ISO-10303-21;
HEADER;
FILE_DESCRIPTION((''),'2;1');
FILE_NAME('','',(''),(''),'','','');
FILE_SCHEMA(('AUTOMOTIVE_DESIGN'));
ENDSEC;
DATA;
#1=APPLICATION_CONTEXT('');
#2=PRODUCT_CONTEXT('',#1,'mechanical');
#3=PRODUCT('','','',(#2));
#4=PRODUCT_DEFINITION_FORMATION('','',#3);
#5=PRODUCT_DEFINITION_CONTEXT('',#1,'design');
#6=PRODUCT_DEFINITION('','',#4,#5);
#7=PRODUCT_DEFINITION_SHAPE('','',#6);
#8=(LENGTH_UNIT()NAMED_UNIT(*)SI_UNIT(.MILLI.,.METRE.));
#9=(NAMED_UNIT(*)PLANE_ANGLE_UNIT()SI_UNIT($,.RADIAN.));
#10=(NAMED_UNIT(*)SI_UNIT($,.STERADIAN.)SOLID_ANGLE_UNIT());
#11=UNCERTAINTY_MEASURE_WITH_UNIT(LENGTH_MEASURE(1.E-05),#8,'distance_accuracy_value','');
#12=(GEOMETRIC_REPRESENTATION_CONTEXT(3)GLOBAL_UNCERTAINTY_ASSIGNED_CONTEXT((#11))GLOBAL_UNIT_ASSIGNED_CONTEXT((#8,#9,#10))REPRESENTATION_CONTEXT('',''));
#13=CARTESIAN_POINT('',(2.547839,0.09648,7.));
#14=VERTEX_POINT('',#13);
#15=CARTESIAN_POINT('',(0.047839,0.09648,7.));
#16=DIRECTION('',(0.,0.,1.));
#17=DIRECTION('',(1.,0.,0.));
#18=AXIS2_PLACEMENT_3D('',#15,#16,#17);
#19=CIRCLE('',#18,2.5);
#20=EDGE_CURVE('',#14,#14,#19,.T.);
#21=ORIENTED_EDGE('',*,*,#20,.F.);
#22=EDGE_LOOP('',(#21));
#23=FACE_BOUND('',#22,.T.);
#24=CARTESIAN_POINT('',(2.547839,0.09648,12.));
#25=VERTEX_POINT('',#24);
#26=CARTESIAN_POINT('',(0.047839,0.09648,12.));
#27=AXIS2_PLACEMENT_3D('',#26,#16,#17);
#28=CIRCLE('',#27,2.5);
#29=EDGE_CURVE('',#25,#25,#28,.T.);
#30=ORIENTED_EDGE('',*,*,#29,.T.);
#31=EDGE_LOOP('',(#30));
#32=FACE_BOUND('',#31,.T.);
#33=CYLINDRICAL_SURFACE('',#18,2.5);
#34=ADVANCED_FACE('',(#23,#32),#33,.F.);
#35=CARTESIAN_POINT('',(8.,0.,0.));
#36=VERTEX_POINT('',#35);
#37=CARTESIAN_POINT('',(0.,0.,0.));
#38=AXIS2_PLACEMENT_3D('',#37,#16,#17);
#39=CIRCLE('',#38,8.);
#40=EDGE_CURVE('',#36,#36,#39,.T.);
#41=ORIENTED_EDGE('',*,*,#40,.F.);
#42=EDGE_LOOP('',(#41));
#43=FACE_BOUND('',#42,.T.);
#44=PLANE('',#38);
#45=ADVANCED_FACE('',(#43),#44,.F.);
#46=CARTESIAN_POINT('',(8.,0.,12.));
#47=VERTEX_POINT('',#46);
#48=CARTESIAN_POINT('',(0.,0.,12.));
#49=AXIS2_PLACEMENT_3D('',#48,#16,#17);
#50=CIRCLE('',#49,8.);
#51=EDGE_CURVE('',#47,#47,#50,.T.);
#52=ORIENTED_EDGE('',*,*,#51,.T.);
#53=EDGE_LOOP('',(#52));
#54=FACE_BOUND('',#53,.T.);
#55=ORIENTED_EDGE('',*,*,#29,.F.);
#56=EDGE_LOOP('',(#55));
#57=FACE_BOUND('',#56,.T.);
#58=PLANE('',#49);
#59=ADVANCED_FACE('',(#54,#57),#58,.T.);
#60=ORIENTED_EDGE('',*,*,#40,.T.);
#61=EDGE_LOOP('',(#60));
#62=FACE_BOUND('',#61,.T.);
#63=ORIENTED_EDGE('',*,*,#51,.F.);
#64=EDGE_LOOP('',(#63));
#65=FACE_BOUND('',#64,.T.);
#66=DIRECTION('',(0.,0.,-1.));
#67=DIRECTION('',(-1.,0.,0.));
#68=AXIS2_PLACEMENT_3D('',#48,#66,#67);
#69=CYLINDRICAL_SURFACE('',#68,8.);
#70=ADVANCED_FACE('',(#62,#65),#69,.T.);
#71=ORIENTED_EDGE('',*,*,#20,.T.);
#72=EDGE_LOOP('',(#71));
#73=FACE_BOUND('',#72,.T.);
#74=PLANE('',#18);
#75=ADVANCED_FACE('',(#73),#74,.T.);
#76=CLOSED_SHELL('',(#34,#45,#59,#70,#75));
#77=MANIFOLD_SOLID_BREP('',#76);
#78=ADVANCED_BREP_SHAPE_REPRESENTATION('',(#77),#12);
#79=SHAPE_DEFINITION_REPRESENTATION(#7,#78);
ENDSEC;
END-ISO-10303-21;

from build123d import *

# Parameters (mm, degrees)
SKETCH1_R           = 8
BOSS_EXTRUDE1_DEPTH = 12
HOLE1_START         = 7
HOLE1_OUTLINE_R     = 2.5
HOLE1_DEPTH         = 5


# Read off the part's stored shape, not the designer's step: Hole1
with BuildPart() as part:
    # Sketch1 → Boss-Extrude1 (new body)
    with BuildSketch(Plane.XY):
        Circle(SKETCH1_R)
    extrude(amount=BOSS_EXTRUDE1_DEPTH)

    # Hole1 outline → Hole1 (cut)
    with BuildSketch(Plane.XY.offset(HOLE1_START)):
        with Locations((0.047839015, 0.096480237)):
            Circle(HOLE1_OUTLINE_R)
    extrude(amount=HOLE1_DEPTH, mode=Mode.SUBTRACT)


solid = part.part
